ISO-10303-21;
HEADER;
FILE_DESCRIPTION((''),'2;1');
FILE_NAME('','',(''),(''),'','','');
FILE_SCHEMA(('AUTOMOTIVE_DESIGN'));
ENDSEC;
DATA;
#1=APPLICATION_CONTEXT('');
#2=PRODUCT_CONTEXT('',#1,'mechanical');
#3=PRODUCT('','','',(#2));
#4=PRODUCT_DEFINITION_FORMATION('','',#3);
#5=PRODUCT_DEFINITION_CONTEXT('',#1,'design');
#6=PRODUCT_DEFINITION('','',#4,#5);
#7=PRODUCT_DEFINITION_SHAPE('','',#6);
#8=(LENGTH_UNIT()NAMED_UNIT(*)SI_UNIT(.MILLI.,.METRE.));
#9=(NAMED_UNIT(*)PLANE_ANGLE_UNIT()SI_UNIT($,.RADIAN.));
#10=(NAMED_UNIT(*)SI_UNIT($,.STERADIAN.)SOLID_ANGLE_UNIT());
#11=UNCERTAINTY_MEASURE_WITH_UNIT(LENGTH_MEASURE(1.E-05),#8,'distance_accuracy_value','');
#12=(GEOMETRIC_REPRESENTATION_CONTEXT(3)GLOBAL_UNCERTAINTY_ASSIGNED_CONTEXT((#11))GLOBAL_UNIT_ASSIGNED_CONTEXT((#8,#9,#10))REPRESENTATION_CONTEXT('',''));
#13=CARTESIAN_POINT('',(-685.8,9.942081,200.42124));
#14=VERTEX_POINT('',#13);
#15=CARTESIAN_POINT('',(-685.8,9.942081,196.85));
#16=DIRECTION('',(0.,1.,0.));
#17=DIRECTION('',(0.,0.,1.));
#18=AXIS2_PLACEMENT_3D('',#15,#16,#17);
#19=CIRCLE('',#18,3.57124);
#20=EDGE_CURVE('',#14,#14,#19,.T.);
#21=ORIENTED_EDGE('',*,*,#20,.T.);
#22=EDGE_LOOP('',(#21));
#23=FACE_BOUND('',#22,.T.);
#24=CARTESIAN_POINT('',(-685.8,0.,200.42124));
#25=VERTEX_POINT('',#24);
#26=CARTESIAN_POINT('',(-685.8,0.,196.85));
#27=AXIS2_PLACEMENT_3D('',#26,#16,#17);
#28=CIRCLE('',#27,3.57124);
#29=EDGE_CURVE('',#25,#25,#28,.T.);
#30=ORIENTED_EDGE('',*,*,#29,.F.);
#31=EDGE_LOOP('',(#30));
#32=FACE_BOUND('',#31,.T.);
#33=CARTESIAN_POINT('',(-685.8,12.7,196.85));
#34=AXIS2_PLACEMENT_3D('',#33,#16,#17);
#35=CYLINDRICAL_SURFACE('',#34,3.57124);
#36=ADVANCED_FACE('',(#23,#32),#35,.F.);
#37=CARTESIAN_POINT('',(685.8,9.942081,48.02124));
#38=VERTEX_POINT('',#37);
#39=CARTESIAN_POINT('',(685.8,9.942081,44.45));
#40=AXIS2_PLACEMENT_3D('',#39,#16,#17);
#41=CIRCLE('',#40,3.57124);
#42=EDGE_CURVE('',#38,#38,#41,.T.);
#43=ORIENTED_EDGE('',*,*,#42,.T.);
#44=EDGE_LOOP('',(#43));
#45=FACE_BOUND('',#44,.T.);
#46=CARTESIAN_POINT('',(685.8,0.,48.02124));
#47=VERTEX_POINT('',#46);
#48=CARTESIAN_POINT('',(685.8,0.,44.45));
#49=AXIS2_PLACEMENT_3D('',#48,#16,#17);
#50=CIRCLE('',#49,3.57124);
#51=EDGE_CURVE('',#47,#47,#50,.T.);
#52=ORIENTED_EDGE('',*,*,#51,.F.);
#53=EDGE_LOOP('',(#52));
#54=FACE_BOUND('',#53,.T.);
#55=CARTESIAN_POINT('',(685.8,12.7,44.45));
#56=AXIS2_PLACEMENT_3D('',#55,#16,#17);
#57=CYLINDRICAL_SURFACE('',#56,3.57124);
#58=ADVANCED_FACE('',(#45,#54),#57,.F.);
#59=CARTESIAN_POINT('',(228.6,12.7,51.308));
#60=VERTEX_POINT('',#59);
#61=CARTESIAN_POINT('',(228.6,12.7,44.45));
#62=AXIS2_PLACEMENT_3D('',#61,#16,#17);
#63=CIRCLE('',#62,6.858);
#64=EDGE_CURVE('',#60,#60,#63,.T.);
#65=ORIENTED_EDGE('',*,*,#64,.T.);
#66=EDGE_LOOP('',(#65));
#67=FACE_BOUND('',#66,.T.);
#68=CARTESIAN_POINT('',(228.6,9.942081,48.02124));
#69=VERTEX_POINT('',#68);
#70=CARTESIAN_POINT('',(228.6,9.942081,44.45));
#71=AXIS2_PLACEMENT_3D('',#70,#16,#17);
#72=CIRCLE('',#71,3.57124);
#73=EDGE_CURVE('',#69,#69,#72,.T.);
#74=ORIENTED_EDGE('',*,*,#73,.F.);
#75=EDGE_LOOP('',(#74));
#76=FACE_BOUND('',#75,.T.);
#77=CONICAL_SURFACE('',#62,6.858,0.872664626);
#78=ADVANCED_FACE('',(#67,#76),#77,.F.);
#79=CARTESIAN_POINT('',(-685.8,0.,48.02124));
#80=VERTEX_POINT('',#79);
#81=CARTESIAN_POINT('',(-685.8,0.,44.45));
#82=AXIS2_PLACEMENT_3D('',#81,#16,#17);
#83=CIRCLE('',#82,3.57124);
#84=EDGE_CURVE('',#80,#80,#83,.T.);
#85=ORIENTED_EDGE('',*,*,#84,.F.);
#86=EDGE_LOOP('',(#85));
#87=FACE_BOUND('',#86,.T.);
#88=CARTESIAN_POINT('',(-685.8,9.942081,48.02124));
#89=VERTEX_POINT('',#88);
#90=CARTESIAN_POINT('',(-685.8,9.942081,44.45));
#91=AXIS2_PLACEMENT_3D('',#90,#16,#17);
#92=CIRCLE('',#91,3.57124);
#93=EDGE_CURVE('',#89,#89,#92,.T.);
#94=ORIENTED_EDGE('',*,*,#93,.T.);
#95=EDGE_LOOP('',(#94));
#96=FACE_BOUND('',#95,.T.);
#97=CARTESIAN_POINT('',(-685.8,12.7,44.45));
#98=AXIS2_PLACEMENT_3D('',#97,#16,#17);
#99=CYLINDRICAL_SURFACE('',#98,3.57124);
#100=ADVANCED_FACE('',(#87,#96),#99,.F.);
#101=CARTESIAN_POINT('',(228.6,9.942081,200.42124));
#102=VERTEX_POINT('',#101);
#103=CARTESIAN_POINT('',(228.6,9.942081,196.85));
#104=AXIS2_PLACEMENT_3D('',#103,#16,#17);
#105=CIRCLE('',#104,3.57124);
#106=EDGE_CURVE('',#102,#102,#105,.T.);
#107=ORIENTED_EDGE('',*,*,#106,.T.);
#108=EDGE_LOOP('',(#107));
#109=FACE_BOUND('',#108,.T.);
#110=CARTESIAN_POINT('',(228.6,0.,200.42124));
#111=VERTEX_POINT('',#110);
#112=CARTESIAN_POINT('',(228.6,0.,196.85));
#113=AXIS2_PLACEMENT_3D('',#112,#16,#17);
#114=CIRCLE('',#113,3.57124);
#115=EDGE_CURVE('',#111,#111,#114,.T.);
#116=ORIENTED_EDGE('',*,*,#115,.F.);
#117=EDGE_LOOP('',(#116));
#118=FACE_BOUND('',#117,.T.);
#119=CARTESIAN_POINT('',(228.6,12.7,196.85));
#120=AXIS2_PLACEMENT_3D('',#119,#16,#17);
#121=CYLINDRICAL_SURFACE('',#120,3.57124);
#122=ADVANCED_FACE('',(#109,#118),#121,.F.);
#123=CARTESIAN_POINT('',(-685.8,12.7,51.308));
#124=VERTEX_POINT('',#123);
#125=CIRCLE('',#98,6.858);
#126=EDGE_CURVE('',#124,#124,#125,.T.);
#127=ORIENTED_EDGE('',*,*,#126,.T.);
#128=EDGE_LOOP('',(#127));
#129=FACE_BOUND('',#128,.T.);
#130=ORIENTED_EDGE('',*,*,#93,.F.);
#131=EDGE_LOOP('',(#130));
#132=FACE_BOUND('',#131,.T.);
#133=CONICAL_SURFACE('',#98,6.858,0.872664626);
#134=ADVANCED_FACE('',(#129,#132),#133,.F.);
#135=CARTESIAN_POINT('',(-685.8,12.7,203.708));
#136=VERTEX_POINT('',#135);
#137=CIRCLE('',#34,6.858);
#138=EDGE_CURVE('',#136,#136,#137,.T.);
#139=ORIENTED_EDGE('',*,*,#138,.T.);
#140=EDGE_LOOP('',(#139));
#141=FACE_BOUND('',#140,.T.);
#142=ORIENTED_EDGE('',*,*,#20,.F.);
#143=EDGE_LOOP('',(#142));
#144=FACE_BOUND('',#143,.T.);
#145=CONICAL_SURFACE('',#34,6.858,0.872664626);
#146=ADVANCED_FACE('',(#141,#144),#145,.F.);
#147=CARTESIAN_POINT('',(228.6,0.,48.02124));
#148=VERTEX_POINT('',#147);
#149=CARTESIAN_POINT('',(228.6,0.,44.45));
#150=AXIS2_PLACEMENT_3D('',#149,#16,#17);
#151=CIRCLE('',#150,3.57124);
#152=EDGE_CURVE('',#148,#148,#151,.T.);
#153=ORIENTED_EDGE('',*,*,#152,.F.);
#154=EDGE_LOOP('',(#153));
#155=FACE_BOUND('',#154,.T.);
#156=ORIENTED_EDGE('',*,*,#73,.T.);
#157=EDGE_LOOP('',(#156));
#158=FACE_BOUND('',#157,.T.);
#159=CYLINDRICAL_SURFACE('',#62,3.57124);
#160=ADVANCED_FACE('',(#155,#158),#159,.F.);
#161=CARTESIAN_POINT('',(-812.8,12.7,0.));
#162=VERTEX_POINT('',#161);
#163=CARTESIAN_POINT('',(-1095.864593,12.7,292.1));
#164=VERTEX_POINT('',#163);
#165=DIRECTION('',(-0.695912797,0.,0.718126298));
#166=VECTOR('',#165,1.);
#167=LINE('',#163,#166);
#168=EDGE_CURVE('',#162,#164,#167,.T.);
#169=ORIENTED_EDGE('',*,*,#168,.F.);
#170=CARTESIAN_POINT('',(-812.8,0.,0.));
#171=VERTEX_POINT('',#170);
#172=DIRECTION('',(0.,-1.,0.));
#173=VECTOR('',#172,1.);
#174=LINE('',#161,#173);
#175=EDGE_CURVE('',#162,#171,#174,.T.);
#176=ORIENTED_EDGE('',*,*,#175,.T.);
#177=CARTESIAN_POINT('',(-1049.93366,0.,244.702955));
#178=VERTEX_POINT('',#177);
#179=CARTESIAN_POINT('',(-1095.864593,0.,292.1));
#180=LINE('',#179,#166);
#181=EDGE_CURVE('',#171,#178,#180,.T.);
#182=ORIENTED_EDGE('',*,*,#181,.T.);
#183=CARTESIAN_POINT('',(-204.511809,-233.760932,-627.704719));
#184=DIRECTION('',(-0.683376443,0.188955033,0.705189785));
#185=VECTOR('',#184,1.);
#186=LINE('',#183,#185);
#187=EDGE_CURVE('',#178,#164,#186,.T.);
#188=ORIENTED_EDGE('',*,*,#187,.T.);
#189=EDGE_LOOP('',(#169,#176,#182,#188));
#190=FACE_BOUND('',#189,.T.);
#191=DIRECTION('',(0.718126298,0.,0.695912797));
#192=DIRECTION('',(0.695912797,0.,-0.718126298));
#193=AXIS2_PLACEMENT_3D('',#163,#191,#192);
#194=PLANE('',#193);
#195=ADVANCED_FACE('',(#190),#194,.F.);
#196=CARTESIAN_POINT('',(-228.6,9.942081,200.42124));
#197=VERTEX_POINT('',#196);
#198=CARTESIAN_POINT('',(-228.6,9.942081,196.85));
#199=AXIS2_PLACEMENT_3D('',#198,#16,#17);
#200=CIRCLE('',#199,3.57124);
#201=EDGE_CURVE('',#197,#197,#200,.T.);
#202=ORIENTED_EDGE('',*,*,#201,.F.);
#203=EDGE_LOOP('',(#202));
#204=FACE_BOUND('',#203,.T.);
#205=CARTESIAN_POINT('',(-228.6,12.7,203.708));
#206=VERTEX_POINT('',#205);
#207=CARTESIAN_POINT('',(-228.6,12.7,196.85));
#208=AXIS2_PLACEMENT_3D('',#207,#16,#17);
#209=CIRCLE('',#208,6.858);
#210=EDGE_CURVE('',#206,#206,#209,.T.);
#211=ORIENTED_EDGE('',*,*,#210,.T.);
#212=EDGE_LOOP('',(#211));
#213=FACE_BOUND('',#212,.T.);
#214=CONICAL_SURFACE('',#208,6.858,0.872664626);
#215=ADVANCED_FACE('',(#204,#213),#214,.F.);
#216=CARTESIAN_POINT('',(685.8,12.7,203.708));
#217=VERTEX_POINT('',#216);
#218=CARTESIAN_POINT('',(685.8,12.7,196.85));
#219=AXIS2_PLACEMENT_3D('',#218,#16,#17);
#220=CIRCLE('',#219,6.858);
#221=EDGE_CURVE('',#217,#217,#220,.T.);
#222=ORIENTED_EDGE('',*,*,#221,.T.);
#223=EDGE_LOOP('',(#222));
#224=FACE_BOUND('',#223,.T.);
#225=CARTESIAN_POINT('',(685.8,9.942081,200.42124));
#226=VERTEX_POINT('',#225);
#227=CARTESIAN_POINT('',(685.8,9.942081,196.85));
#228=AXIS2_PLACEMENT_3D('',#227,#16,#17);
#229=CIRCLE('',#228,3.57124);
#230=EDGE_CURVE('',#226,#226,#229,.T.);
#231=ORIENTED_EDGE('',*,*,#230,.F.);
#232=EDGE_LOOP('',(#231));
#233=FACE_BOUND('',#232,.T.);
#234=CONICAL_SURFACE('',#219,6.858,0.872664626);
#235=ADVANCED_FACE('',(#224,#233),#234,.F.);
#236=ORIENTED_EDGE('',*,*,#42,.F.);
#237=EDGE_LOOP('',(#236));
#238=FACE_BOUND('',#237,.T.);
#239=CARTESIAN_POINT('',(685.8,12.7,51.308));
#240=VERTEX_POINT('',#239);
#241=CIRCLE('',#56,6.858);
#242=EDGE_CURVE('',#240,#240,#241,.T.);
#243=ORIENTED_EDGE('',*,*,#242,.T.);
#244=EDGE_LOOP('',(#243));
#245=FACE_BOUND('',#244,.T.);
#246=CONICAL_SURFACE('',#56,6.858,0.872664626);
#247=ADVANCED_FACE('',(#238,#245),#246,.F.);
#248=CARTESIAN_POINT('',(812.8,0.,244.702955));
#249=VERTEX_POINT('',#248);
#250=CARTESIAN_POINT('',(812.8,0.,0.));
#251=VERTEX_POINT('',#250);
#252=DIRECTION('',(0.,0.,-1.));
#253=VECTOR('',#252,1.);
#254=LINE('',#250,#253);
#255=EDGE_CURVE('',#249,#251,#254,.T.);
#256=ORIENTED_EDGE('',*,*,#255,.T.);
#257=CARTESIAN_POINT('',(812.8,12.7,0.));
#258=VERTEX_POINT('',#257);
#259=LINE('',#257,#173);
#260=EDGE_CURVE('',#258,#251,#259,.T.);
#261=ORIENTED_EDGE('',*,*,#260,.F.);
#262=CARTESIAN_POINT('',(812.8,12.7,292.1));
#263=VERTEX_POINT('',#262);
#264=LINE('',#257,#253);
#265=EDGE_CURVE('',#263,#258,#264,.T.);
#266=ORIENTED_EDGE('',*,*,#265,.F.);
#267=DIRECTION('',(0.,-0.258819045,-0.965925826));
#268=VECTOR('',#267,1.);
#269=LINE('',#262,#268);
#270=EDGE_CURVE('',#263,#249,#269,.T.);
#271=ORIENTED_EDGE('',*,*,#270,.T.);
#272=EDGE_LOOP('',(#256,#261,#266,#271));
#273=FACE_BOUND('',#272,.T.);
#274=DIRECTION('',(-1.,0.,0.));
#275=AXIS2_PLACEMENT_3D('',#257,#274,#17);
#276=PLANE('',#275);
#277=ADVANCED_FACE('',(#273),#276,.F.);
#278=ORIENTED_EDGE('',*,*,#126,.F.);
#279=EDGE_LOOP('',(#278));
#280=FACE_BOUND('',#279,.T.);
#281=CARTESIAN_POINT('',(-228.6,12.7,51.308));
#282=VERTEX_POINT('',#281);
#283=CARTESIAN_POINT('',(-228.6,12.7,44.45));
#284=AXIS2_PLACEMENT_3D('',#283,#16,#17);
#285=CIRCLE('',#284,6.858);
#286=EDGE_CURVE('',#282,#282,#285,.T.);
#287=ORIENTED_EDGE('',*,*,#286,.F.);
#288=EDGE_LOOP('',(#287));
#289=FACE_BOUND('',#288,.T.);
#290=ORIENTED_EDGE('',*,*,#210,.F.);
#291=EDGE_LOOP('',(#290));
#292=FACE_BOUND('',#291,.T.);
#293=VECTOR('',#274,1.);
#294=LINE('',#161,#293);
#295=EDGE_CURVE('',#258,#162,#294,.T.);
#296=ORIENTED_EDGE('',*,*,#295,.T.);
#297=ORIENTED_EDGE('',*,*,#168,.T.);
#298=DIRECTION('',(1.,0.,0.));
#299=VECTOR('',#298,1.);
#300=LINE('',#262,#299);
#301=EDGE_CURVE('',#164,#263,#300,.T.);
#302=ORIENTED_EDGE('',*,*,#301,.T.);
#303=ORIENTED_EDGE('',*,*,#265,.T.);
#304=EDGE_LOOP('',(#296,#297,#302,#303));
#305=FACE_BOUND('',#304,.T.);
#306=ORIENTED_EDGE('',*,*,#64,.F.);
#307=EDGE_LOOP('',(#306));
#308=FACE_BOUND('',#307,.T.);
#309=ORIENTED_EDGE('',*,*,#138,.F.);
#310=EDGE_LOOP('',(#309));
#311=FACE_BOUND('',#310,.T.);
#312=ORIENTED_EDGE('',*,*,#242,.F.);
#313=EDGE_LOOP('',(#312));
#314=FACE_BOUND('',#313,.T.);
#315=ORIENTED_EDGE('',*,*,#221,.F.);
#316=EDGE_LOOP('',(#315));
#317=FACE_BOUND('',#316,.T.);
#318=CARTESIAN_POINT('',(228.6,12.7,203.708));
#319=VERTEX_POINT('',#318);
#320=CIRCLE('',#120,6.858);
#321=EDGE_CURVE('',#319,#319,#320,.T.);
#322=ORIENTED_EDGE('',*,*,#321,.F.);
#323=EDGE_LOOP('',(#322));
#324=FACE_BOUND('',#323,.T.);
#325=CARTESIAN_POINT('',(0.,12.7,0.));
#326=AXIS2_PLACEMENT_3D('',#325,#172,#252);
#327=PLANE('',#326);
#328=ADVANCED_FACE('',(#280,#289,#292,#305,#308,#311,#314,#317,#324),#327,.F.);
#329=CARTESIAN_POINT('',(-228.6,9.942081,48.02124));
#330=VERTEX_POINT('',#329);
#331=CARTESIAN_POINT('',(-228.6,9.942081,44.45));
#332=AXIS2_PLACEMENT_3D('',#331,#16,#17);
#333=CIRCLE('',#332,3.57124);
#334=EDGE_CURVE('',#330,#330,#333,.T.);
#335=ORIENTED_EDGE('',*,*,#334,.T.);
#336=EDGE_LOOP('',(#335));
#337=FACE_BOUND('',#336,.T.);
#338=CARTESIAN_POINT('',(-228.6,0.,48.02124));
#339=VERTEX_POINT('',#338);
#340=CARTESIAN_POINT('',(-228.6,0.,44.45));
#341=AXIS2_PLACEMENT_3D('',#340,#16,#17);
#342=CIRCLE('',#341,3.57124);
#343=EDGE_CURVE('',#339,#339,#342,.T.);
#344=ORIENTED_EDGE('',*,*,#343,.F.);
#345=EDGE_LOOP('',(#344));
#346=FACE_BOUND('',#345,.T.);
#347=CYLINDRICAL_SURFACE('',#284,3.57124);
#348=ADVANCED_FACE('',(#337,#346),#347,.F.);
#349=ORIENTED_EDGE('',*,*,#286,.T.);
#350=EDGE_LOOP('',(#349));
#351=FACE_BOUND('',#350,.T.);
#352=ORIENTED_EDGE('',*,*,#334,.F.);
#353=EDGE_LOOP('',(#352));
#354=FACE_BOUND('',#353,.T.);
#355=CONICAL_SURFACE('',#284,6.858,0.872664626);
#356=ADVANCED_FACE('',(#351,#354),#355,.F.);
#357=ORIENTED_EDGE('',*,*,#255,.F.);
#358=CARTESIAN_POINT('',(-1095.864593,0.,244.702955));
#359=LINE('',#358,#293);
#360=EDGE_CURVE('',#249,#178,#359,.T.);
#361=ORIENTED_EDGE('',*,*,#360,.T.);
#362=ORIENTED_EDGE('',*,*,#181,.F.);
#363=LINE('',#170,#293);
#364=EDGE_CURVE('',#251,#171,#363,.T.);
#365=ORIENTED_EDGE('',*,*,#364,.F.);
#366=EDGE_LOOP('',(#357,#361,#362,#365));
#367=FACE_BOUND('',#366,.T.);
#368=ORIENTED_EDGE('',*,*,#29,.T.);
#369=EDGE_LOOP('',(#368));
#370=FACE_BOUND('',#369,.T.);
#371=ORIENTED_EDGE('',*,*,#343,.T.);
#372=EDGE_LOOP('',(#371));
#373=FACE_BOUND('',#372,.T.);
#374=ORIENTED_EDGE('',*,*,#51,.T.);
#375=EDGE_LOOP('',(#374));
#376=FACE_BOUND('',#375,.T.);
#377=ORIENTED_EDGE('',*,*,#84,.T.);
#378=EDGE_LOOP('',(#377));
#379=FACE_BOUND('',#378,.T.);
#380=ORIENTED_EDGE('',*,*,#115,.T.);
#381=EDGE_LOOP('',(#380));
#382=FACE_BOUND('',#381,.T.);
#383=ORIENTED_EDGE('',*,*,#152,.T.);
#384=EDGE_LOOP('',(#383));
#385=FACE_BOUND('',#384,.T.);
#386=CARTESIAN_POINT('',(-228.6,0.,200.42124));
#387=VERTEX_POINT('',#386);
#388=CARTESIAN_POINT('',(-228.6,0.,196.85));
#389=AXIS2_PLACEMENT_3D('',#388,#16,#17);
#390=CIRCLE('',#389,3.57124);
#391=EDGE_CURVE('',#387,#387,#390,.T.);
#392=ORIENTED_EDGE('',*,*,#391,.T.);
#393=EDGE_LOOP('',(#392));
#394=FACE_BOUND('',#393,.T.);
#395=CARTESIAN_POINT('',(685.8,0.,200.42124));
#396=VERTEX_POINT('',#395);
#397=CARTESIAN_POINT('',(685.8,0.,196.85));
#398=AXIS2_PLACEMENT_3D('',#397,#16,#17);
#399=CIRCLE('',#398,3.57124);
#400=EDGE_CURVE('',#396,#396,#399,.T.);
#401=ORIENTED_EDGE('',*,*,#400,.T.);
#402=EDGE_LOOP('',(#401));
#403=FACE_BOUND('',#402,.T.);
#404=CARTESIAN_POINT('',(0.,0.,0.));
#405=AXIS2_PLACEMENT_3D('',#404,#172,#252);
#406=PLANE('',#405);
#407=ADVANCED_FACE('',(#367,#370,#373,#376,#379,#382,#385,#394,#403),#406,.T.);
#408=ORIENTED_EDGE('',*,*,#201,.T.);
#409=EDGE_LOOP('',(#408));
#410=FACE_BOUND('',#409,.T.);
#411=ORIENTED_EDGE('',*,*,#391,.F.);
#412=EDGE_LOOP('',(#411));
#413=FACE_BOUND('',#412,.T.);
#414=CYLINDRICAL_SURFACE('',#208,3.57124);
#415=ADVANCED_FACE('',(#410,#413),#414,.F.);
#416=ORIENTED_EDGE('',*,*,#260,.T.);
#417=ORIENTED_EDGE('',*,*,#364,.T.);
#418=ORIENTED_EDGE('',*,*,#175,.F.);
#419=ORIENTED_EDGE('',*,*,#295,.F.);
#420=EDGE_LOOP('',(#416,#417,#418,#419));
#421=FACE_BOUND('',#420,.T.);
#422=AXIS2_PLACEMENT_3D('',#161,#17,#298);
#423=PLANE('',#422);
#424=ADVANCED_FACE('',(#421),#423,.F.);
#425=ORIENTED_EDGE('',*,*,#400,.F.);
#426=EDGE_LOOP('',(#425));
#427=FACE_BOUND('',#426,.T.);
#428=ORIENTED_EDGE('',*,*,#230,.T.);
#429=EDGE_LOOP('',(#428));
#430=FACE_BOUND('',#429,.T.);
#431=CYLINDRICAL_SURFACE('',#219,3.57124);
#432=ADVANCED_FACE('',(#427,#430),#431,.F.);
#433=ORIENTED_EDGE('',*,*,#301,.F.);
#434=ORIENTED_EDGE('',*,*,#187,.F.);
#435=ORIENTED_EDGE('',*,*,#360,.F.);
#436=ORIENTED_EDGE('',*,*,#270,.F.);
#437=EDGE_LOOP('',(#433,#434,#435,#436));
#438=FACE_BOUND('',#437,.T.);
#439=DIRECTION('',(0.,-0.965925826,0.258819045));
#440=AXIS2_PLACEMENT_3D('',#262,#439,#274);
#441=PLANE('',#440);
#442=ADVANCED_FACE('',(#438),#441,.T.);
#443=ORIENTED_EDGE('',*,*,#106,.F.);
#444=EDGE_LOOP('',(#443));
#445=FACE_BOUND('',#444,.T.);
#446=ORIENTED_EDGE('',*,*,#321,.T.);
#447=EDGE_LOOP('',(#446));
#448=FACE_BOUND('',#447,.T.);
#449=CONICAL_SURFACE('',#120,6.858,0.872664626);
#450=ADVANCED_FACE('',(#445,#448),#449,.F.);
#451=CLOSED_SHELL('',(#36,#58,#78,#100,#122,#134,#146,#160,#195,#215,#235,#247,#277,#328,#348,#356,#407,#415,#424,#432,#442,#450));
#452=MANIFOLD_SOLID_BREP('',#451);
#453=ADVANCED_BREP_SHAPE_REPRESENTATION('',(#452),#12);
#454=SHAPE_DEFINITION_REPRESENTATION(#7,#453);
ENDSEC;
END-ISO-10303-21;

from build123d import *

# Parameters (mm, degrees)
BOSS_EXTRUDE1_DEPTH                                 = 12.7
CHAMFER1_SIZE2                                      = 47.397045256
CHAMFER1_SIZE                                       = 12.7
CSK_FOR_1_4_FLAT_HEAD_MACHINE_SCREW_100_D           = 7.14248
CSK_FOR_1_4_FLAT_HEAD_MACHINE_SCREW_100_CSINK_D     = 13.716
CSK_FOR_1_4_FLAT_HEAD_MACHINE_SCREW_100_CSINK_ANGLE = 100
LPATTERN1_COUNT                                     = 4
LPATTERN1_PITCH                                     = 457.2


with BuildPart() as part:
    # Sketch1 → Boss-Extrude1 (new body)
    with BuildSketch(Plane(origin=(0, 0, 0), x_dir=(1, 0, 0), z_dir=(0, 1, 0))):
        Polygon((-812.8, 0), (812.8, 0), (812.8, -292.1), (-1095.864592562, -292.1), align=None)
    extrude(amount=BOSS_EXTRUDE1_DEPTH)

    # Chamfer1
    chamfer1_edges = [part.edges().sort_by_distance(p)[0] for p in [
        (-141.532296281, 0, 292.1),
    ]]
    chamfer1_side = [part.faces().sort_by_distance(p)[0] for p in [
        (-141.532296281, 0.254, 292.1),
    ]]
    chamfer(chamfer1_edges, length=CHAMFER1_SIZE - 0.0001, length2=CHAMFER1_SIZE2 - 0.0001, reference=chamfer1_side[0])  # a hair under: the kernel refuses the full size

    # CSK for 1/4 Flat Head Machine Screw (100)1 (through all)
    with Locations(Plane(origin=(0, 12.7, 0), x_dir=(1, 0, 0), z_dir=(0, 1, 0))):
        with Locations((-685.8, -44.45), (-685.8, -196.85)):
            csk_for_1_4_flat_head_machine_screw_100 = CounterSinkHole(CSK_FOR_1_4_FLAT_HEAD_MACHINE_SCREW_100_D / 2, CSK_FOR_1_4_FLAT_HEAD_MACHINE_SCREW_100_CSINK_D / 2, counter_sink_angle=CSK_FOR_1_4_FLAT_HEAD_MACHINE_SCREW_100_CSINK_ANGLE)

    # LPattern1: CSK for 1/4 Flat Head Machine Screw (100)1 ×4
    with Locations(*[(i * LPATTERN1_PITCH, 0, 0) for i in range(1, LPATTERN1_COUNT)]):
        add(csk_for_1_4_flat_head_machine_screw_100, mode=Mode.SUBTRACT)


solid = part.part
